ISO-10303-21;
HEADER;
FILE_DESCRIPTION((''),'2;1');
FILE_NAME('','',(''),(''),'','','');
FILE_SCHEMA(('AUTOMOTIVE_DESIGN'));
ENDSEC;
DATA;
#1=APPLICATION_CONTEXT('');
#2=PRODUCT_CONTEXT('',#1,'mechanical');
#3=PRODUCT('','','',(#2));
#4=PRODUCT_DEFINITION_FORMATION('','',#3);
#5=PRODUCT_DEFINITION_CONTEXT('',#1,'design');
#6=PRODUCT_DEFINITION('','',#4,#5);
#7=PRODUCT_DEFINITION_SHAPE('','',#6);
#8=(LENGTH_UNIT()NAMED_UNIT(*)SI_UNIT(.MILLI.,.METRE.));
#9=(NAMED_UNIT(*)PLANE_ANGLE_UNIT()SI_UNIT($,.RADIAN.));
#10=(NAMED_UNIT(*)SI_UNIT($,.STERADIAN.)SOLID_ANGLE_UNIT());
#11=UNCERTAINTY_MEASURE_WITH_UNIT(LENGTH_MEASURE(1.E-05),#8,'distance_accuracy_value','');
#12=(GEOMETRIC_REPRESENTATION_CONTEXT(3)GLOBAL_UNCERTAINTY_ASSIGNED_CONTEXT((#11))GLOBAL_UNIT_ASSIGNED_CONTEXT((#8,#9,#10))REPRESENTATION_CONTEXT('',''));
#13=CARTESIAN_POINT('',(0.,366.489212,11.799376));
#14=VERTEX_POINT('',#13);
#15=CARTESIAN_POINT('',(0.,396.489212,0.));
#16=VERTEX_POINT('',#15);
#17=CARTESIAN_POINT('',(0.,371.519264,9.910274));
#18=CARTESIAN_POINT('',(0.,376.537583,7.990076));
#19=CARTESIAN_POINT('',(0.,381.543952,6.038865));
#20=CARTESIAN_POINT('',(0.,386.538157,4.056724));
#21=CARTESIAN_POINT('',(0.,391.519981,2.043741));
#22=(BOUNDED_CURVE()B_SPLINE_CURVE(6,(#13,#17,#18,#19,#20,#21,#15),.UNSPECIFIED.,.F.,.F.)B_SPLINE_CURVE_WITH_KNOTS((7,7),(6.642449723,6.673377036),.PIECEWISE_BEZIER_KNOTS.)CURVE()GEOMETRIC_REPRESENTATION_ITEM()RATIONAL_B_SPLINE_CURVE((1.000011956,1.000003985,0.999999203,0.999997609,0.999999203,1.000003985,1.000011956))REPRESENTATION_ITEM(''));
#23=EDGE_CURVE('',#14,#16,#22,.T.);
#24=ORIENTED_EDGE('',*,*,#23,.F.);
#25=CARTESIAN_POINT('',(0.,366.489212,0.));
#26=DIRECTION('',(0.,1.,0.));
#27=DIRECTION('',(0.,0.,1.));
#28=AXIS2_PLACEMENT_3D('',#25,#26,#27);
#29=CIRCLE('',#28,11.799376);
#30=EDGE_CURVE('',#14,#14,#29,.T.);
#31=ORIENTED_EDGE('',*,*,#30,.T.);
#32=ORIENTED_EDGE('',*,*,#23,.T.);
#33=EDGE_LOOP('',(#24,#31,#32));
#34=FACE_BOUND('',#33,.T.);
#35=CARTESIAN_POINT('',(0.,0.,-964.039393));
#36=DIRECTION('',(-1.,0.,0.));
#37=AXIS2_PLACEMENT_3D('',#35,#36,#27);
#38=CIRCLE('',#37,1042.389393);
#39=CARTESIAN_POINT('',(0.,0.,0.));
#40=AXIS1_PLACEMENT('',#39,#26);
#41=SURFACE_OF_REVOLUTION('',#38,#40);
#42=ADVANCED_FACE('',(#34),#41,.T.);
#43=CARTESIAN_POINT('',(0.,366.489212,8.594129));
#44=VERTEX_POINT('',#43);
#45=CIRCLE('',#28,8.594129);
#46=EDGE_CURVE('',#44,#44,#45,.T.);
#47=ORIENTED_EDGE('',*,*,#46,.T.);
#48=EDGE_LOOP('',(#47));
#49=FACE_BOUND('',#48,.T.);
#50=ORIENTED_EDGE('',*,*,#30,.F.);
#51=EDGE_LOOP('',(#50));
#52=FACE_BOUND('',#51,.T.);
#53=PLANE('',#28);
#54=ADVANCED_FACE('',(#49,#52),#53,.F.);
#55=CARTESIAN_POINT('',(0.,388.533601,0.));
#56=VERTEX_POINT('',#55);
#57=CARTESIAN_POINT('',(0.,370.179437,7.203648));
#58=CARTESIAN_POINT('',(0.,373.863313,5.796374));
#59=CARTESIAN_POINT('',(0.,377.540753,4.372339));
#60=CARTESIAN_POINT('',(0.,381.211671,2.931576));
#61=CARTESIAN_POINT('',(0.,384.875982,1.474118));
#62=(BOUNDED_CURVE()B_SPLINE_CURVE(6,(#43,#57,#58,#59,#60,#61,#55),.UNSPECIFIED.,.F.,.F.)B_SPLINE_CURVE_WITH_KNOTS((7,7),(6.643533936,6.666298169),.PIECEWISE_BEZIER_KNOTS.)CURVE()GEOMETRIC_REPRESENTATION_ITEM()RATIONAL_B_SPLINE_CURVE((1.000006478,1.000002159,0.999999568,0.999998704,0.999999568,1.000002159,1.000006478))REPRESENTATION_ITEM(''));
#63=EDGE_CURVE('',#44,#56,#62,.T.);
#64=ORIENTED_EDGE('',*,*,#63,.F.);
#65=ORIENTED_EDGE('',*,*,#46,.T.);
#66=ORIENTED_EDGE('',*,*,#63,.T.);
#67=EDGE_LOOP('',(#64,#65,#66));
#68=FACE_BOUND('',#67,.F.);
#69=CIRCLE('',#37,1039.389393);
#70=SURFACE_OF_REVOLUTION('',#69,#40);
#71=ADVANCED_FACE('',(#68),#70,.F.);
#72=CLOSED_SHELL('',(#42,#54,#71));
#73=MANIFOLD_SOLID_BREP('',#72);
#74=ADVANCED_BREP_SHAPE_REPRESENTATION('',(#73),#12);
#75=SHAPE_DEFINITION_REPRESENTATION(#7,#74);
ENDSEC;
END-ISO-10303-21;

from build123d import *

# Parameters (mm, degrees)
BOSS_EXTRUDE1_REACH = 566.43
SKETCH5_R           = 78.35


# Read off the part's stored shape, not the designer's step: Shell1
with BuildPart() as part:
    # Sketch1 → Revolve3 (revolve)
    with BuildSketch(Plane.XY, mode=Mode.PRIVATE) as revolve3_sk:
        with BuildLine():
            Line((0, 400), (0, 402.756656622))
            ThreePointArc((0, 402.756656622), (60.363605816, 205.385909299), (80.75, 0))
            Line((80.75, 0), (80.75, -150))
            Line((80.75, -150), (78.35, -150))
            Line((78.35, -150), (78.35, 0))
            ThreePointArc((78.35, 0), (58.574924408, 202.078213736), (0, 396.489212171))
            Line((0, 396.489212171), (0, 400))
        make_face()
    revolve(revolve3_sk.sketch.rotate(Axis((0, 400, 0), (0, 1, 0)), 270), axis=Axis((0, 400, 0), (0, 1, 0)))


with BuildPart() as body_2:

    # Sketch5 → Boss-Extrude1 (new, up to next)
    with BuildSketch(Plane.XZ.offset(150), mode=Mode.PRIVATE) as boss_extrude1_sk1:
        with Locations(Location((0, 0, 0), (0, 0, 270))):
            Circle(SKETCH5_R)
    boss_extrude1_tool1 = extrude(boss_extrude1_sk1.sketch, amount=-BOSS_EXTRUDE1_REACH, mode=Mode.PRIVATE) - part.part
    add(boss_extrude1_tool1.solids().sort_by_distance((0, -150, 0))[0])


with BuildPart() as body_2_2:
    # Split1: the piece on the far side of the plane
    add(body_2.part)
    split(bisect_by=Plane.ZX.offset(366.489212171), keep=Keep.BOTTOM)


with BuildPart() as body_2_1:
    add(body_2.part)

    # Split1
    split(bisect_by=Plane.ZX.offset(366.489212171), keep=Keep.TOP)

    # Shell1 outline → Shell1 (revolve, cut)
    with BuildSketch(Plane.XY):
        with BuildLine():
            Line((0, 366.489212071), (8.594128749, 366.489212171))
            add(Edge.make_bspline(
                [(8.594128749, 366.489212171), (4.422525693, 377.560318323), (0, 388.533600877)],
                knots=[0.360348629, 0.360348629, 0.360348629, 0.383112862, 0.383112862, 0.383112862], degree=2, weights=[1, 0.999935224, 1]))
            Line((0, 388.533600877), (0, 366.489212071))
        make_face()
    revolve(axis=Axis((0, 0, 0), (0, 1, 0)), mode=Mode.SUBTRACT)


solid = body_2_1.part
